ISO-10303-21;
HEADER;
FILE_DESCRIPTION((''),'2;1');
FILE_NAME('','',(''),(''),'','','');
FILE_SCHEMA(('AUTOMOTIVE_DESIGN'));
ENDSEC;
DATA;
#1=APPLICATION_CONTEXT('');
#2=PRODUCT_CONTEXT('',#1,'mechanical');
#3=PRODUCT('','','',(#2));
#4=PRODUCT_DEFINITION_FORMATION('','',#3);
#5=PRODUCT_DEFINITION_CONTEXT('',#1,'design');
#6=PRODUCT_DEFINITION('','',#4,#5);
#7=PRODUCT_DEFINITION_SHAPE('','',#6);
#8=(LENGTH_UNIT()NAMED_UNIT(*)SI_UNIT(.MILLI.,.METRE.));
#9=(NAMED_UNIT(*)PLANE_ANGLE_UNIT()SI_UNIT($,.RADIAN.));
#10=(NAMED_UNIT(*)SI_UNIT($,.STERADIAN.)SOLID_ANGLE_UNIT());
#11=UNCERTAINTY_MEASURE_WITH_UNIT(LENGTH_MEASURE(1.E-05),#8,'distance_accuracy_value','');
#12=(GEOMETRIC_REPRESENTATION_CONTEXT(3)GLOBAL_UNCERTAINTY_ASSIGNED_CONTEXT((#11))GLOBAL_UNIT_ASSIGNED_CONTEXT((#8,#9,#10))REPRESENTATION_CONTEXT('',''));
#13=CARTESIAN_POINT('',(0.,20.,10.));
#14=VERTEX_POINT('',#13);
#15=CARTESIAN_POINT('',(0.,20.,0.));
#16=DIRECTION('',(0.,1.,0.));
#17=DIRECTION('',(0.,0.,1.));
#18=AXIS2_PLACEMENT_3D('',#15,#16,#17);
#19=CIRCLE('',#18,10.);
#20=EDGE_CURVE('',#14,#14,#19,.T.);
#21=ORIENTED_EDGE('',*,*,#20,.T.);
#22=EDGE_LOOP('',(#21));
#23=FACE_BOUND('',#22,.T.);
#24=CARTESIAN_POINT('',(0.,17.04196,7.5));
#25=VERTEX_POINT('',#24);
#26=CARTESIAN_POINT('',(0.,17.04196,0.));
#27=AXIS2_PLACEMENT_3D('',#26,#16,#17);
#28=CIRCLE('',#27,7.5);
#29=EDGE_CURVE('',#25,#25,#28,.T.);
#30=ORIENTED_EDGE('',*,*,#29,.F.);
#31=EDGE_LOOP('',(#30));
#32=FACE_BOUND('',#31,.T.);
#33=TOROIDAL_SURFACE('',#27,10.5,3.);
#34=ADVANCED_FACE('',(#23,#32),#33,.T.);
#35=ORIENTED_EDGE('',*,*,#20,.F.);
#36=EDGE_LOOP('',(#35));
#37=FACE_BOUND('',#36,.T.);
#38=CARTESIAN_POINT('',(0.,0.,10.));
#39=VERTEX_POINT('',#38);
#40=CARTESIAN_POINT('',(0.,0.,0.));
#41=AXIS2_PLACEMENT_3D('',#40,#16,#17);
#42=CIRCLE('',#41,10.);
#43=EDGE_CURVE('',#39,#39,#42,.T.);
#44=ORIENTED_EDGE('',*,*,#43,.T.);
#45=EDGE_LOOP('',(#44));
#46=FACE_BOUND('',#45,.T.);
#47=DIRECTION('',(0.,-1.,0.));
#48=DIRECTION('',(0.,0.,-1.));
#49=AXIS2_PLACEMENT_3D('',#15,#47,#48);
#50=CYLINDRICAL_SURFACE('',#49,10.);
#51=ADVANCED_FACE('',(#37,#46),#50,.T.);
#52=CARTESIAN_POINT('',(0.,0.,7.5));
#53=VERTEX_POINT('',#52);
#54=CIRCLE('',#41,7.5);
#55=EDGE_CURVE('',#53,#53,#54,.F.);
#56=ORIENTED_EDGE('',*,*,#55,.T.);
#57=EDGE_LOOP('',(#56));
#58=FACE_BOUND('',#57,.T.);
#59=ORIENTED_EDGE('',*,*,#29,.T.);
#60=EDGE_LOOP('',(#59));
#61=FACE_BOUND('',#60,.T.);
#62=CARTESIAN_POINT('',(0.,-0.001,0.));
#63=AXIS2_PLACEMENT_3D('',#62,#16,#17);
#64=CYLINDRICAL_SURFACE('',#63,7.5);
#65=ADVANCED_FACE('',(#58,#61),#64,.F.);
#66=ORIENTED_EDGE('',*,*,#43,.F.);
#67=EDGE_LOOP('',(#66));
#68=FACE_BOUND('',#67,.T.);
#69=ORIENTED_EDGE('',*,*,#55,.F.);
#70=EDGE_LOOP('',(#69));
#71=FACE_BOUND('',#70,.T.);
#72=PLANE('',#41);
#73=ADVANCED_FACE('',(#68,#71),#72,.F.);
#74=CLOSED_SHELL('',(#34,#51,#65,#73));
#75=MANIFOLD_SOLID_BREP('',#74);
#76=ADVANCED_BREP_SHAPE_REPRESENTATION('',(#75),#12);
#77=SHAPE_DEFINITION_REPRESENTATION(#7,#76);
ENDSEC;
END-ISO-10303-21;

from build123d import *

# Parameters (mm, degrees)
SKETCH1_R           = 10
BOSS_EXTRUDE1_DEPTH = 20
CUT_EXTRUDE1_REACH  = 26.495
SKETCH2_R           = 7.5
FILLET1_R           = 3


with BuildPart() as part:
    # Sketch1 → Boss-Extrude1 (new body)
    with BuildSketch(Plane(origin=(0, 0, 0), x_dir=(1, 0, 0), z_dir=(0, 1, 0))):
        with Locations(Location((0, 0, 0), (0, 0, 270))):
            Circle(SKETCH1_R)
    extrude(amount=BOSS_EXTRUDE1_DEPTH)

    # Sketch2 → Cut-Extrude1 (cut, up to next)
    with BuildSketch(Plane(origin=(0, 20, 0), x_dir=(1, 0, 0), z_dir=(0, 1, 0)), mode=Mode.PRIVATE) as cut_extrude1_sk1:
        with Locations(Location((0, 0, 0), (0, 0, 270))):
            Circle(SKETCH2_R)
    cut_extrude1_tool1 = extrude(cut_extrude1_sk1.sketch, amount=-CUT_EXTRUDE1_REACH, mode=Mode.PRIVATE) & part.part
    add(cut_extrude1_tool1.solids().sort_by_distance((0, 20, 0))[0], mode=Mode.SUBTRACT)

    # Fillet1
    # the kernel refuses this fillet: 3 mm, written as the material it takes off along each edge
    with BuildSketch(Plane(origin=(0, 20, 0), x_dir=(-1.8e-16, 0, 1), z_dir=(-1, 0, -1.8e-16))) as fillet1_piece_1:
        with BuildLine():
            CenterArc((10.5, -2.958039891550115), FILLET1_R, 99.5940682268595, 80.4059317731405)
            Line((7.5, -2.958039891550115), (7.44, -2.958039891550115))
            Line((7.44, -2.958039891550115), (7.44, 0))
            Line((7.44, 0), (7.5, 0.05999999999999872))
            ThreePointArc((7.5, 0.05999999999999872), (8.750000000000025, 0.05999999999999872), (9.99000000000005, 0.05916079783069961))
            Line((9.99000000000005, 0.05916079783069961), (10.00000000000005, -2.9843e-13))
        make_face()
    revolve(axis=Axis((0, 20, 0), (0, 1, 0)), mode=Mode.SUBTRACT)


solid = part.part
